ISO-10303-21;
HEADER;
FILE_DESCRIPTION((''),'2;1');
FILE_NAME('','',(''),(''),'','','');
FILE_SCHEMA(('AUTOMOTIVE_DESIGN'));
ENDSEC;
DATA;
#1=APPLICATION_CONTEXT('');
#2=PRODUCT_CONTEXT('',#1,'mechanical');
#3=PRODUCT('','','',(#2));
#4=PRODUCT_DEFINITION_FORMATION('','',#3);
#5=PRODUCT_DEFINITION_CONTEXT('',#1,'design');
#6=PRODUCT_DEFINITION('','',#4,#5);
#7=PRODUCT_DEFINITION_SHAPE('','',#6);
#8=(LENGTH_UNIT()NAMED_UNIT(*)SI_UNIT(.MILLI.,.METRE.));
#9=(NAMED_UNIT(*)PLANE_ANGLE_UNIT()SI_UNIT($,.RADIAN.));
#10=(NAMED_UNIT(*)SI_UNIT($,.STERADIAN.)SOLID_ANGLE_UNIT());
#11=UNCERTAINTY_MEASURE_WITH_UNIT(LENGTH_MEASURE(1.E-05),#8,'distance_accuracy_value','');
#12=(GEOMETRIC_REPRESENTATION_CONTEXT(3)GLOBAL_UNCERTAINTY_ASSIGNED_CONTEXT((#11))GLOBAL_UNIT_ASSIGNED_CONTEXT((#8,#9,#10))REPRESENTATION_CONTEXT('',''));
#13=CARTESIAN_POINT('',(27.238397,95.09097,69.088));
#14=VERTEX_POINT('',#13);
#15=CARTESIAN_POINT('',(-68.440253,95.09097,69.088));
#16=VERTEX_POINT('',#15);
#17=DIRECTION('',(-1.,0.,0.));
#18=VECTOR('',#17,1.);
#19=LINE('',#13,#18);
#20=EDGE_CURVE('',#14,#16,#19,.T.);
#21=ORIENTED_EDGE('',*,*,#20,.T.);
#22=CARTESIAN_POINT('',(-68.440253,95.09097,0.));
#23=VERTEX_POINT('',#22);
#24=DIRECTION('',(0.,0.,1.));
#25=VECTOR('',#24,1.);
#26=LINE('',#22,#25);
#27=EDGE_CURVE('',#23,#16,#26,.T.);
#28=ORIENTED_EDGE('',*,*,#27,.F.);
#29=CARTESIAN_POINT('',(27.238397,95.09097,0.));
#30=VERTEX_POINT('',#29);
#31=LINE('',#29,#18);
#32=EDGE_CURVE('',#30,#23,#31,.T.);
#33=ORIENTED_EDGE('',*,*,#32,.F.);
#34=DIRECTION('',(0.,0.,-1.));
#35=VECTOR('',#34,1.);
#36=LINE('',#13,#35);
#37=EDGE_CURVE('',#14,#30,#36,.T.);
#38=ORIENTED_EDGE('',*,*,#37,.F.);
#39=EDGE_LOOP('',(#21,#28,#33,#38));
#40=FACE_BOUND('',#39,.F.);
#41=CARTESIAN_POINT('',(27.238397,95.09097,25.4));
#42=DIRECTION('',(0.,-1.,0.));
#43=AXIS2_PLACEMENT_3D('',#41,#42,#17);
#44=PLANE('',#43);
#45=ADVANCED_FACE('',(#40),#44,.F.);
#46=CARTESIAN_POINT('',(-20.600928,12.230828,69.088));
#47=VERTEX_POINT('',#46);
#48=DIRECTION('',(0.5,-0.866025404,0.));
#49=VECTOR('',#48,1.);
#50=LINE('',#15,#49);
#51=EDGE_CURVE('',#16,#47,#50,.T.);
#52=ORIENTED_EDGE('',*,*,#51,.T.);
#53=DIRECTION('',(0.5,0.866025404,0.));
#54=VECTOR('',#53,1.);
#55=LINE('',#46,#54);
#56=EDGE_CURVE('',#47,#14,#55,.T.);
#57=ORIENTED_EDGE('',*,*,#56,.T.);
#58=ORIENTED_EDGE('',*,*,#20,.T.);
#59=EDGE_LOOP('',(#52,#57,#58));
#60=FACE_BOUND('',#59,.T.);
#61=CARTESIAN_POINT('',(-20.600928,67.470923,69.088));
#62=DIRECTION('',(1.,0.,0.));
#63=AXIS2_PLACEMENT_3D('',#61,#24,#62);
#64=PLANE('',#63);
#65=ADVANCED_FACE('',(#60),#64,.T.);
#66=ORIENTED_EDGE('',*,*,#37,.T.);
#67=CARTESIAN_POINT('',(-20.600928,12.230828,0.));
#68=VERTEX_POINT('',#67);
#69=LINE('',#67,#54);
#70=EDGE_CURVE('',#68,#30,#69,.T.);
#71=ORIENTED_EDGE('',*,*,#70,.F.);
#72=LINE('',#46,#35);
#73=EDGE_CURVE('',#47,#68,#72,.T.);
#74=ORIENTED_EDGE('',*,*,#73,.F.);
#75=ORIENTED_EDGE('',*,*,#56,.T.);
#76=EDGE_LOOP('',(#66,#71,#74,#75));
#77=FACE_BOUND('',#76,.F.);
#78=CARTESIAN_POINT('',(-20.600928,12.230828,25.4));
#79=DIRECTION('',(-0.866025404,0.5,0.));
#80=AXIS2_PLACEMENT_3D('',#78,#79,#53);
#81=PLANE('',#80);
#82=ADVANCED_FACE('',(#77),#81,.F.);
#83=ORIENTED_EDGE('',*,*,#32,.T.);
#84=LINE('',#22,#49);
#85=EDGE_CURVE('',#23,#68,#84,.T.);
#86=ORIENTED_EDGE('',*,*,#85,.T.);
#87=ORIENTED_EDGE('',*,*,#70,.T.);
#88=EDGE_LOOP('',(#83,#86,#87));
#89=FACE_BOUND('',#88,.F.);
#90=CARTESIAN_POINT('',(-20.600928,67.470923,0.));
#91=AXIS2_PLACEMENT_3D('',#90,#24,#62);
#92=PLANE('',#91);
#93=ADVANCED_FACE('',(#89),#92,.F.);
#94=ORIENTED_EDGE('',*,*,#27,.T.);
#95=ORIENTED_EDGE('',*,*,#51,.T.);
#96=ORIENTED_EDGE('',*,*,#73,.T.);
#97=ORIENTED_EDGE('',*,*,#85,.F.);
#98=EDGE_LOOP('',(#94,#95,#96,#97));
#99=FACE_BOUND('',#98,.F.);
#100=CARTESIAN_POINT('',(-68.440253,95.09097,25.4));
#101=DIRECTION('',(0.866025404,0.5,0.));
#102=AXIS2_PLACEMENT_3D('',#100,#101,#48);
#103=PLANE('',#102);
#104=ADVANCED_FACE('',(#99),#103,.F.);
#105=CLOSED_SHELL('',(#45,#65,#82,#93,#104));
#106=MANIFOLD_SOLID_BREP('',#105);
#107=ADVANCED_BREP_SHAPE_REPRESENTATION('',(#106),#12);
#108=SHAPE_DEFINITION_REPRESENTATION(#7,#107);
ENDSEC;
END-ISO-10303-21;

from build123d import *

# Parameters (mm, degrees)
F3_DEPTH = 25.4
F4_DEPTH = 43.688


# Not quite as in the source:
# - the program builds the solid bodies; features that only make, move or delete a surface that nothing else refers to are left out


with BuildPart() as f3:
    # F2 (on Top) → F3 (new body)
    with BuildSketch(Plane.XY):
        Polygon((27.2383972908, 95.090970397), (-68.4402532782, 95.090970397), (-20.6009279937, 12.2308284044), align=None)
    extrude(amount=F3_DEPTH)

    # F4 (add): a face of the model
    f4_faces = [f3.faces().sort_by_distance(p)[0] for p in [
        (-20.6009279937, 67.4709230661, 25.4),
    ]]
    extrude(f4_faces, amount=F4_DEPTH)


solid = f3.part
